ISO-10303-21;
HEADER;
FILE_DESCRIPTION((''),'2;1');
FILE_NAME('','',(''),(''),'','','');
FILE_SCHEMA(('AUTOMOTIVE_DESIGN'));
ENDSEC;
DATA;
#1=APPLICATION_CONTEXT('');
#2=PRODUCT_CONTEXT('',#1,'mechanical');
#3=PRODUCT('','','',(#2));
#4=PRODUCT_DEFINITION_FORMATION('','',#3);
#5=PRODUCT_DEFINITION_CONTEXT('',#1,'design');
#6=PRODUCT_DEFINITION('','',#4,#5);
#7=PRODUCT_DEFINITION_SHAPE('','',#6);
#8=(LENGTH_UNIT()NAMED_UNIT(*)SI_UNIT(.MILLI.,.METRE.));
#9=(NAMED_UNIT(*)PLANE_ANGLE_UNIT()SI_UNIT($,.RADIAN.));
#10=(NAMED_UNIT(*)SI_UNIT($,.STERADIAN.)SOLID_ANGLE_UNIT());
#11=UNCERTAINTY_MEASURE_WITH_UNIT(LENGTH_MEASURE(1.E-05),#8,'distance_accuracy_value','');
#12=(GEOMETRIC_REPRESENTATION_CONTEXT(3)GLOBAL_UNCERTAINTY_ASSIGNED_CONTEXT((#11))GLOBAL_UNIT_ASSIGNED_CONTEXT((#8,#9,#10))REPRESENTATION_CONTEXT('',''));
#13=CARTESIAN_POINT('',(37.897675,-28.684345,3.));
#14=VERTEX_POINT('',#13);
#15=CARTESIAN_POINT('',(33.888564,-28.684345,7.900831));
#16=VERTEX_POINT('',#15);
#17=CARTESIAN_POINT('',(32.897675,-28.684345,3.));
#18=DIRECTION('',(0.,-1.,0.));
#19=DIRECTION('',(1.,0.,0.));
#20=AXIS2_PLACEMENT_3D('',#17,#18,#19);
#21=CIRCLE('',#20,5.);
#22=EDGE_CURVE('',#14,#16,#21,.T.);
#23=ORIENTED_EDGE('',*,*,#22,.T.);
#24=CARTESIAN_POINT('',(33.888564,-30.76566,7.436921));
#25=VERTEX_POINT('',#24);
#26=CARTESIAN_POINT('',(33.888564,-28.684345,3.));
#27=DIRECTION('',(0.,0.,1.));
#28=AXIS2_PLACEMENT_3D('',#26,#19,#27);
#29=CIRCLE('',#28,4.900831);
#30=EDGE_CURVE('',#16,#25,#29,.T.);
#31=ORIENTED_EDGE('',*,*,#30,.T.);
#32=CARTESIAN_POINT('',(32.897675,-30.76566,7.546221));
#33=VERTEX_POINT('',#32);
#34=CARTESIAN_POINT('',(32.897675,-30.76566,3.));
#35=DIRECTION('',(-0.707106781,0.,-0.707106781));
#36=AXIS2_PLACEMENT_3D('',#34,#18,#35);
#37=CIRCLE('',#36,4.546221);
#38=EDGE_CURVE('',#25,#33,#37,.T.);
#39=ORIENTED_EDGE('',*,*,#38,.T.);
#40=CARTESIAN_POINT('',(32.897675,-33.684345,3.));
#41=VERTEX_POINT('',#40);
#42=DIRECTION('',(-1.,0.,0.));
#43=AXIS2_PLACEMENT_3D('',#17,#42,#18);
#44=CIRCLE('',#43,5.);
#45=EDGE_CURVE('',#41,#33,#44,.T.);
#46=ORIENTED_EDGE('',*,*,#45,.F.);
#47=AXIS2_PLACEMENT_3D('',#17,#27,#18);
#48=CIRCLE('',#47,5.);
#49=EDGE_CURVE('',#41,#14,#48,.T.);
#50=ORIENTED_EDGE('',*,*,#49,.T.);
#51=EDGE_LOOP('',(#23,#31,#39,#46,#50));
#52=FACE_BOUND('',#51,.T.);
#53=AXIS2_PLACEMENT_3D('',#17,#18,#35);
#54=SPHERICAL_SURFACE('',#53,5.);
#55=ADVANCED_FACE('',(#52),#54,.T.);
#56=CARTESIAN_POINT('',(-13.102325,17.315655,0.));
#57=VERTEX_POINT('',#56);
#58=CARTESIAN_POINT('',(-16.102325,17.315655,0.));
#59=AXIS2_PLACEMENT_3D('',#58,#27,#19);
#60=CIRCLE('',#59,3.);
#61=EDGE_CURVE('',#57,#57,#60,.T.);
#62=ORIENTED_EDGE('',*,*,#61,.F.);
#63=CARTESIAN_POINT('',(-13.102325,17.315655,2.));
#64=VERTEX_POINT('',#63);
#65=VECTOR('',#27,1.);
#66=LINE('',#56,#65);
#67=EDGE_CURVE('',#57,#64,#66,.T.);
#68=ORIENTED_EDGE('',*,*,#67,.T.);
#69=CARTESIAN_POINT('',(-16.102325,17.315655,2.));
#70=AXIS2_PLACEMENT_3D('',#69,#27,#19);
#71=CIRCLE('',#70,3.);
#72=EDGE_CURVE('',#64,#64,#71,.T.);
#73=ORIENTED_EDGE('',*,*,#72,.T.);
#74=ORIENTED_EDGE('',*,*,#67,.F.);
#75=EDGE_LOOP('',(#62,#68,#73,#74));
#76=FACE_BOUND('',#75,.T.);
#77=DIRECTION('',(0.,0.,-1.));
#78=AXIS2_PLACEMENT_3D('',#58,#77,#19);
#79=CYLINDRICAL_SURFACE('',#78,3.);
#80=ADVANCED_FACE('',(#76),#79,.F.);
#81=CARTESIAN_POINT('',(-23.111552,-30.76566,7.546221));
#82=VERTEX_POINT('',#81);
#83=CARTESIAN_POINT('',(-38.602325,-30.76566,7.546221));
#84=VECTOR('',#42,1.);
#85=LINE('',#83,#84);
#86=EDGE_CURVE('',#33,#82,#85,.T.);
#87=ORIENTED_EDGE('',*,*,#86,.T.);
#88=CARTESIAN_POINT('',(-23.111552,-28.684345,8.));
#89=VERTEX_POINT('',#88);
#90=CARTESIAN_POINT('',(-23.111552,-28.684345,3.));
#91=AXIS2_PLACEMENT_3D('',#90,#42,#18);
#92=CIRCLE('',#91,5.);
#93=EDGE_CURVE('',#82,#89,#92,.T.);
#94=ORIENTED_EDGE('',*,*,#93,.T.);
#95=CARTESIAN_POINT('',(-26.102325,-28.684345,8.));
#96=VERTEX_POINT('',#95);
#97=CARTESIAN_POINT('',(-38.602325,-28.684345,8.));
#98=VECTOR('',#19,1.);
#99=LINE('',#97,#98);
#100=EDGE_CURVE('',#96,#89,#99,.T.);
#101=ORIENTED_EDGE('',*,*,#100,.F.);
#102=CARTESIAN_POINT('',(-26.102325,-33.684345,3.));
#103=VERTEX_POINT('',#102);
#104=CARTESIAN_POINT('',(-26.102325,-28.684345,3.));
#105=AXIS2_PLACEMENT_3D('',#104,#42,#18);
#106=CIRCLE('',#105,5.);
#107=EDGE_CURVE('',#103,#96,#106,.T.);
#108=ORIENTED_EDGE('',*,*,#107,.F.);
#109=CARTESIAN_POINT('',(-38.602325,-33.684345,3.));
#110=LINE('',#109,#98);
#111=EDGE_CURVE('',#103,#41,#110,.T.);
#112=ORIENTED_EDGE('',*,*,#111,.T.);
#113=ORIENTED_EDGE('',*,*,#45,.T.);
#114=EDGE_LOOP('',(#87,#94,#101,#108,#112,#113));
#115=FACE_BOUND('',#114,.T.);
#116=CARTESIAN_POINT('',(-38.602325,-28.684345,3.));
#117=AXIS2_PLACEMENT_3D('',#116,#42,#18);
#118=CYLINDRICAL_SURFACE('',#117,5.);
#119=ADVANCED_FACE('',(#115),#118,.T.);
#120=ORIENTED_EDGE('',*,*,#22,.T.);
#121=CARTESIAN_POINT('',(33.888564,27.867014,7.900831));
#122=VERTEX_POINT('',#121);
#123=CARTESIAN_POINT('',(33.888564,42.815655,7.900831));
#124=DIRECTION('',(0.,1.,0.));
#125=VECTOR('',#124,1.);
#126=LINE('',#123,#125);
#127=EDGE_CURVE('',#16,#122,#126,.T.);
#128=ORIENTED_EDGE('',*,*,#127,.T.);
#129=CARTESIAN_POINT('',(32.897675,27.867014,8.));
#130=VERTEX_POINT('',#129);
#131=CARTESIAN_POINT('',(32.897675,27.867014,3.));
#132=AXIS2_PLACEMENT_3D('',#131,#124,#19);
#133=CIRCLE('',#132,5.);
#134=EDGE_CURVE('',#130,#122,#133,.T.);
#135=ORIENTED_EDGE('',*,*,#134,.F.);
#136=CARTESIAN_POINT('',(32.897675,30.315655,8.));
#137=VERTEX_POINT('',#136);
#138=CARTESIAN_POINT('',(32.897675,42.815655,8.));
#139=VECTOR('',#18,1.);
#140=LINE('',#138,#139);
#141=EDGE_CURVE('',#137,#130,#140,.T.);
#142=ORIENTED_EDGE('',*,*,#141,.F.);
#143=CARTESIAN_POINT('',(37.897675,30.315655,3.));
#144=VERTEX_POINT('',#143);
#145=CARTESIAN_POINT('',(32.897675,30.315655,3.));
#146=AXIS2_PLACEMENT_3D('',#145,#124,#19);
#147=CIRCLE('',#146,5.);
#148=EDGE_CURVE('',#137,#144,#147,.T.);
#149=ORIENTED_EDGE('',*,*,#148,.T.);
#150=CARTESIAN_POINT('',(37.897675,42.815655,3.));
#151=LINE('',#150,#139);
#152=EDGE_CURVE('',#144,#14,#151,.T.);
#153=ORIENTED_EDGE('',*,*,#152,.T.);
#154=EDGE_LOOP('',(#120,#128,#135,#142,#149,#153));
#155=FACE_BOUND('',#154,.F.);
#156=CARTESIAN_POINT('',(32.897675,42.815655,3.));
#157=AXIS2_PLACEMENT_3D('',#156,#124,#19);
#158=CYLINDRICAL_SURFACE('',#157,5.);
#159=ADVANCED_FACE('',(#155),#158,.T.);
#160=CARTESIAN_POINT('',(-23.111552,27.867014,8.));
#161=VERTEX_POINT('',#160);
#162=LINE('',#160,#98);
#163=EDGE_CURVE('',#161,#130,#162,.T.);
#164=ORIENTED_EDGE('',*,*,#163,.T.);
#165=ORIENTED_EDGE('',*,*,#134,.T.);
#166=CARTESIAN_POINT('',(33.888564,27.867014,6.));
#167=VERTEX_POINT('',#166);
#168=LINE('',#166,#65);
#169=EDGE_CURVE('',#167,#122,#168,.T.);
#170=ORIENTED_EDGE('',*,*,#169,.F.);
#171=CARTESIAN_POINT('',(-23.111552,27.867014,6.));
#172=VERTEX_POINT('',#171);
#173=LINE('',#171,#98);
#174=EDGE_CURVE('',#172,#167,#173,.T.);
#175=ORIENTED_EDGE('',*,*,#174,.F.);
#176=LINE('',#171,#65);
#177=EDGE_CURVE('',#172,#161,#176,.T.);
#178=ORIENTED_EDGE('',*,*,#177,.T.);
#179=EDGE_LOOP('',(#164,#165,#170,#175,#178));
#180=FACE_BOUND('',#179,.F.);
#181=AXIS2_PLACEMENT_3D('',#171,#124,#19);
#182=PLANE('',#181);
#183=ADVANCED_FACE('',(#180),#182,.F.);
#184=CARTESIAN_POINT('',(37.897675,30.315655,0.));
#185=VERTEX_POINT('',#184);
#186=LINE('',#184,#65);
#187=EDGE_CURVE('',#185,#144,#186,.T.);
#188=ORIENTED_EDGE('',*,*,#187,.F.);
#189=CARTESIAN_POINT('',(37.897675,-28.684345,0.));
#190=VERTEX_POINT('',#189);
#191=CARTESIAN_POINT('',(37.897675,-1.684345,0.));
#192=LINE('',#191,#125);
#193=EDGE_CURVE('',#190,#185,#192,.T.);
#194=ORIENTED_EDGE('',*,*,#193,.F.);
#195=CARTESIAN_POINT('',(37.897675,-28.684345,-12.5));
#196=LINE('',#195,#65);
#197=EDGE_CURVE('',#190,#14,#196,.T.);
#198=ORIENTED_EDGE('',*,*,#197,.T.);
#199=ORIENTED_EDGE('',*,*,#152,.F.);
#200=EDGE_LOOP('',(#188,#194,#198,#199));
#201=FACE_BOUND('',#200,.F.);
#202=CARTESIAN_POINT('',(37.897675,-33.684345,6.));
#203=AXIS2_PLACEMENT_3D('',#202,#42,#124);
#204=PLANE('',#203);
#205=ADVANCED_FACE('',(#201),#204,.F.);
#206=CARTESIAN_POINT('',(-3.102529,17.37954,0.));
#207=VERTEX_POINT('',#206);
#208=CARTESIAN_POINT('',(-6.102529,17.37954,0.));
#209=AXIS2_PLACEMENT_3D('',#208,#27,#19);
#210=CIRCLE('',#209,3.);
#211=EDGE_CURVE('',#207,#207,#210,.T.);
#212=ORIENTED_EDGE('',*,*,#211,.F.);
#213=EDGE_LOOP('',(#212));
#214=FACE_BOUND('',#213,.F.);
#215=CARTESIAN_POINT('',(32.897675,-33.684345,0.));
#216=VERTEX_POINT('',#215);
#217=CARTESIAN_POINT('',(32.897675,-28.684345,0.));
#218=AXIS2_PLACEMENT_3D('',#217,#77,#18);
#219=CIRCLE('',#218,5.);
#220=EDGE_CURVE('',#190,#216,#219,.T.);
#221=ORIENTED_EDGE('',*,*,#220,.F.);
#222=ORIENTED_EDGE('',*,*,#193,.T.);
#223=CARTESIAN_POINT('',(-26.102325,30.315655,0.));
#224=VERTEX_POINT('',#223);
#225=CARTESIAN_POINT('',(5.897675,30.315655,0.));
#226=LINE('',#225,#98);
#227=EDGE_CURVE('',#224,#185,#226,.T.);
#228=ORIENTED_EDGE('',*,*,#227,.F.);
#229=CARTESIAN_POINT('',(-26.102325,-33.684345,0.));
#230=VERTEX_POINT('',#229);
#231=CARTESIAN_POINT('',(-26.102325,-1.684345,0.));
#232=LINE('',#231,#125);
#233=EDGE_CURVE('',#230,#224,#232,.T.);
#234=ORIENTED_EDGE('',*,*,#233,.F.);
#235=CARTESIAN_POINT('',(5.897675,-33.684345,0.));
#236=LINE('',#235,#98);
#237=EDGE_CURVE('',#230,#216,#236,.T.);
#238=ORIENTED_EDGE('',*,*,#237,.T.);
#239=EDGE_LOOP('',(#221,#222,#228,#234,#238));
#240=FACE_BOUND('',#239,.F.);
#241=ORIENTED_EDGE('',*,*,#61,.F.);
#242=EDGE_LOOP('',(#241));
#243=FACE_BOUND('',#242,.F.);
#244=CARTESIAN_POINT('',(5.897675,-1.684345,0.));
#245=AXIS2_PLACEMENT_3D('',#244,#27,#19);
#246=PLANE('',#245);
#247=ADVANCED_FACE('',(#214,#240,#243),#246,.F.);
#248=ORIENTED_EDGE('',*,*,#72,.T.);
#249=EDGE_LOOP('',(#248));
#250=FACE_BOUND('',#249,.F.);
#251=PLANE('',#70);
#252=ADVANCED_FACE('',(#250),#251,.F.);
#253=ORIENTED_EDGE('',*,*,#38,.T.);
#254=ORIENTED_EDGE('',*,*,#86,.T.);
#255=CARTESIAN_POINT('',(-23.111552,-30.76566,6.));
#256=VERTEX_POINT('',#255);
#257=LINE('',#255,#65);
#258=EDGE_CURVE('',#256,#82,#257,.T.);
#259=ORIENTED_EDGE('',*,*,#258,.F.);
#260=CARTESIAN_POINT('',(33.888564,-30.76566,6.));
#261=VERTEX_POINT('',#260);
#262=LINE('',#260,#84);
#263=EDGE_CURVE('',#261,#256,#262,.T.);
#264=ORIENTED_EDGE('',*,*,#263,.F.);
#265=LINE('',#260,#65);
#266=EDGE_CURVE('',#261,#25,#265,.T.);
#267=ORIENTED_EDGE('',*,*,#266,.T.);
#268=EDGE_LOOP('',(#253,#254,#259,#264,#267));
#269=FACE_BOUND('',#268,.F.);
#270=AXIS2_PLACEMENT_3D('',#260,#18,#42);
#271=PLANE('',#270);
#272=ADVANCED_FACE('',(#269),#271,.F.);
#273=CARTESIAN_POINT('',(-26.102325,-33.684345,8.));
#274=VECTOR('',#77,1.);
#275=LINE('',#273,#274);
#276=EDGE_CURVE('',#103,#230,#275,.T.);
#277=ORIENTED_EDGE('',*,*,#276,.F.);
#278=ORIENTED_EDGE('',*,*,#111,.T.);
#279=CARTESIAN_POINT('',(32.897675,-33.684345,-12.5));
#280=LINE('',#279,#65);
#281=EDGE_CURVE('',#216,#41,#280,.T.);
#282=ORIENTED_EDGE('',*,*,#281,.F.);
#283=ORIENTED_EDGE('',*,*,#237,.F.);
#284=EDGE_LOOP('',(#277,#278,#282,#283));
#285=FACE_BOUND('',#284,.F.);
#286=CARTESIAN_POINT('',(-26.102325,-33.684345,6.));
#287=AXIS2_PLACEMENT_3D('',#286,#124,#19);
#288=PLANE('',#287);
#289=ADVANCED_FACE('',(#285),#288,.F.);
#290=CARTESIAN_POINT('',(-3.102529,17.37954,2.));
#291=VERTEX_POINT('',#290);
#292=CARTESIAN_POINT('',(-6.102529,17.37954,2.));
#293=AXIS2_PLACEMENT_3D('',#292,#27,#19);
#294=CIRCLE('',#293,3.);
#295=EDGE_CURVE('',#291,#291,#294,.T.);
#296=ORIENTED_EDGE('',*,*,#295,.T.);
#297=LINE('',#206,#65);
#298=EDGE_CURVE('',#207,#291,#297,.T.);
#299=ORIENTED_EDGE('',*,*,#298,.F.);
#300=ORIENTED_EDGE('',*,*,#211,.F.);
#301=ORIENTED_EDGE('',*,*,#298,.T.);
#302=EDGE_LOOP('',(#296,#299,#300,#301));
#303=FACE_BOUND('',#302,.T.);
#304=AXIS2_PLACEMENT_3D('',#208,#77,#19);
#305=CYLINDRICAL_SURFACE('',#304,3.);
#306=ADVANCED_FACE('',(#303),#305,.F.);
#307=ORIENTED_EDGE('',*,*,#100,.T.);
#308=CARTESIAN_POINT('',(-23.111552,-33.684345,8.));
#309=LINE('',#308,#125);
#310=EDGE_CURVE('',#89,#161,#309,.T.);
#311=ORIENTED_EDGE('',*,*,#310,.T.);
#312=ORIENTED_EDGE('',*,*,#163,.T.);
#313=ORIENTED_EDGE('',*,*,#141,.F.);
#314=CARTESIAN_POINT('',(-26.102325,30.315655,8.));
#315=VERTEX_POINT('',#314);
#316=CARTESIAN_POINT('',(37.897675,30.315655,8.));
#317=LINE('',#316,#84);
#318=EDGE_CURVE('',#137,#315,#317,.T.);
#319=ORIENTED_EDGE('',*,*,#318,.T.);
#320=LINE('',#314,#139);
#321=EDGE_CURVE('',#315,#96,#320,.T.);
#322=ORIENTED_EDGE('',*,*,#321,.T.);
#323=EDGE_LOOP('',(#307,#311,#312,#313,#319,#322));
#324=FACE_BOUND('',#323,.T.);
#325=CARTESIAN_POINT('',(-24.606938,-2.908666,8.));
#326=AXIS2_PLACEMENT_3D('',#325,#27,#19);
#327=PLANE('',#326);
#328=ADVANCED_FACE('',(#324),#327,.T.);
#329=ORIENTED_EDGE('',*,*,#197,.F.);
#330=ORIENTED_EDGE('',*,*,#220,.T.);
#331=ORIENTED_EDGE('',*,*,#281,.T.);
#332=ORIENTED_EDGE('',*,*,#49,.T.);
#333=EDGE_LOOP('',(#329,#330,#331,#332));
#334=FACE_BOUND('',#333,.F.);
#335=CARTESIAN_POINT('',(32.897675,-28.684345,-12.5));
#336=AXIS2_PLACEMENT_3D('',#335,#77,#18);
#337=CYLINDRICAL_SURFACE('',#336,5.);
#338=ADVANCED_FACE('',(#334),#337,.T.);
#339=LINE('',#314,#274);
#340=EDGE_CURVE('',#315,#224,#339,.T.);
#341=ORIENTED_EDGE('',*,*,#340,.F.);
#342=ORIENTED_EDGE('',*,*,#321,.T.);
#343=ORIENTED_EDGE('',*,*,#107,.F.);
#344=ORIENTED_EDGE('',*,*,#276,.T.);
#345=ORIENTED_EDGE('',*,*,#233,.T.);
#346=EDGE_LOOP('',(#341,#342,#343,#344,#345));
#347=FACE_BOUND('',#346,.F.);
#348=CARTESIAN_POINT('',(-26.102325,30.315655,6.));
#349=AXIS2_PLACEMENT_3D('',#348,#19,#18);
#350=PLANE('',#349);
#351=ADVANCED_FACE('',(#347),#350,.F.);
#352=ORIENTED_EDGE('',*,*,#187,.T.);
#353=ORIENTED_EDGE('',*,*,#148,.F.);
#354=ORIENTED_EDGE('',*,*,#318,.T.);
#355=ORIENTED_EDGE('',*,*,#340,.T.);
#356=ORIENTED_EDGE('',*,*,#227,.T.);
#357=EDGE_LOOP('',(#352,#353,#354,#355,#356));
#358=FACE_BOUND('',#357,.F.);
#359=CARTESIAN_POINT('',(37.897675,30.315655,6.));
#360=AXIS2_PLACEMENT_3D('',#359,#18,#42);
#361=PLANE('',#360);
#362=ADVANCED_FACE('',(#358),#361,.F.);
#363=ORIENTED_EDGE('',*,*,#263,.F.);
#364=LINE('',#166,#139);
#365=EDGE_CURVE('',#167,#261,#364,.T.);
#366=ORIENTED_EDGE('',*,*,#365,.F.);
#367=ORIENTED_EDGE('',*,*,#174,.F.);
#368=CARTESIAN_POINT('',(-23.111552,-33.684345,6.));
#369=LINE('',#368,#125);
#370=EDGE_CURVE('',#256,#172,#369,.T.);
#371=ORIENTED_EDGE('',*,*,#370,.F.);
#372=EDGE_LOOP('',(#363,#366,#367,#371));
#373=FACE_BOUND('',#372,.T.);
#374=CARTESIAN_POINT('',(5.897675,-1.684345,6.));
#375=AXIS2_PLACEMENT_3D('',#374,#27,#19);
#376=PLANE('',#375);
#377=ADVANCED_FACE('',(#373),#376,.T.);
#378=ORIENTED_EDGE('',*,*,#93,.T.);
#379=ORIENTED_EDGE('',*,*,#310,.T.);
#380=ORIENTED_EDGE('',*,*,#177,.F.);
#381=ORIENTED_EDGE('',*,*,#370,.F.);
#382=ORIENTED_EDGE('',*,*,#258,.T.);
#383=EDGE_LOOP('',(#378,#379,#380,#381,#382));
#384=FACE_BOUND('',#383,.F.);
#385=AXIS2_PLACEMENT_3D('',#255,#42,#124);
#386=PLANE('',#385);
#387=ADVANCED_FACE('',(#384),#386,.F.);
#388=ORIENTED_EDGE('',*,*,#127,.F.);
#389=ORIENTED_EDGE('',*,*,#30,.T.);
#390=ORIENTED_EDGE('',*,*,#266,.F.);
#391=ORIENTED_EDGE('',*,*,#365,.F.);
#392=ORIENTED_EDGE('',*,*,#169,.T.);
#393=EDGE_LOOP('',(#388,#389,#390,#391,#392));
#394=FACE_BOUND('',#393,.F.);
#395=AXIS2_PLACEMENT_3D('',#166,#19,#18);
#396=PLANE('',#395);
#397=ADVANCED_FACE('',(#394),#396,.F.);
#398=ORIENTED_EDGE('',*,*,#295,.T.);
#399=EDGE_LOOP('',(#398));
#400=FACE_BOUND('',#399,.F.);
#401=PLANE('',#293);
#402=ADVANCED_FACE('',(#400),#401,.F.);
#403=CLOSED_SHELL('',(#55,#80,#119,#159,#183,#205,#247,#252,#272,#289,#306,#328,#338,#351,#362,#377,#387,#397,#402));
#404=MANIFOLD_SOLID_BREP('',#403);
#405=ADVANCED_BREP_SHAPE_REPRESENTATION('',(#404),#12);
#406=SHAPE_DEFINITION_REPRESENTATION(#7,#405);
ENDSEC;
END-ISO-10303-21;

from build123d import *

# Parameters (mm, degrees)
F0_W         = 64
F0_H         = 64
F1_DEPTH     = 6
F2_R         = 3
F3_DEPTH     = 2
F5_DEPTH     = 2
F7_T1_DEPTH  = 71.5
F7_T3_DEPTH  = 15.5
F7_T5_DEPTH  = 71.5
F7_S9_W      = 5
F7_S9_H      = 5
F7_T10_DEPTH = 5


# Not quite as in the source:
# - a fillet or chamfer that OpenCascade refuses, or shapes differently, is made with other operations: its cross-section is extruded or revolved along the edge and cut away or added
# - a feature of the source that left no trace in its solid (it failed there, or was rolled back) is left out


with BuildPart() as f1:
    # F0 (on Top) → F1 (new body)
    with BuildSketch(Plane.XY):
        with Locations((5.897675477, -1.6843453527)):
            Rectangle(F0_W, F0_H)
    extrude(amount=F1_DEPTH)

    # F2 (on Top) → F3 (cut)
    with BuildSketch(Plane.XY):
        with Locations((-16.102324523, 17.3156546473)):
            Circle(F2_R)
        with Locations((-6.1025285926, 17.3795400876)):
            Circle(F2_R)
    extrude(amount=F3_DEPTH, mode=Mode.SUBTRACT)

    # F4 (on face) → F5 (join)
    with BuildSketch(Plane.XY.offset(6)):
        Polygon((-23.111552, 27.8670135885), (-26.102324523, 27.8670135885), (-26.102324523, -33.6843453527), (-23.111552, -33.6843453527), (-23.111552, -30.7656601071), align=None)
        Polygon((-26.102324523, 30.3156546473), (-26.102324523, 27.8670135885), (-23.111552, 27.8670135885), (33.8885635138, 27.8670135885), (37.897675477, 27.8670135885), (37.897675477, 30.3156546473), align=None)
        Polygon((37.897675477, 27.8670135885), (33.8885635138, 27.8670135885), (33.8885635138, -30.7656601071), (37.897675477, -30.7656601071), (37.897675477, -12.6674966887), align=None)
        Polygon((33.8885635138, -30.7656601071), (-23.111552, -30.7656601071), (-23.111552, -33.6843453527), (37.897675477, -33.6843453527), (37.897675477, -30.7656601071), align=None)
    extrude(amount=F5_DEPTH)

    # F7: fillet of radius 5 on 3 edges, made by hand

    # F7_s2 → F7_t1 (cut)
    with BuildSketch(Plane.YZ.offset(-38.602324523)):
        with BuildLine():
            ThreePointArc((-33.6843453527, 3), (-32.2198792586, 6.5355339059), (-28.6843453527, 8))
            Line((-28.6843453527, 8), (-33.6843453527, 8))
            Line((-33.6843453527, 8), (-33.6843453527, 3))
        make_face()
    extrude(amount=F7_T1_DEPTH, mode=Mode.SUBTRACT)

    # F7_s4 → F7_t3 (cut)
    with BuildSketch(Plane.XY.offset(-12.5)):
        with BuildLine():
            ThreePointArc((32.897675477, -33.6843453527), (36.4332093829, -32.2198792586), (37.897675477, -28.6843453527))
            Line((37.897675477, -28.6843453527), (37.897675477, -33.6843453527))
            Line((37.897675477, -33.6843453527), (32.897675477, -33.6843453527))
        make_face()
    extrude(amount=F7_T3_DEPTH, mode=Mode.SUBTRACT)

    # F7_s6 → F7_t5 (cut)
    with BuildSketch(Plane.XZ.offset(-42.8156546473)):
        with BuildLine():
            ThreePointArc((37.897675477, 3), (36.4332093829, 6.5355339059), (32.897675477, 8))
            Line((32.897675477, 8), (37.897675477, 8))
            Line((37.897675477, 8), (37.897675477, 3))
        make_face()
    extrude(amount=F7_T5_DEPTH, mode=Mode.SUBTRACT)


with BuildPart() as f7_tool8:
    # F7_s9 → F7_t10 (new body)
    with BuildSketch(Plane.XZ.offset(28.6843453527)):
        with Locations((35.397675477, 5.5)):
            Rectangle(F7_S9_W, F7_S9_H)
    extrude(amount=F7_T10_DEPTH)

    # F7_s11 → F7_t12 (revolve, cut)
    with BuildSketch(Plane(origin=(32.897675477, -28.6843453527, 3), x_dir=(-0.7071067812, 0, -0.7071067812), z_dir=(-0.7071067812, 0, 0.7071067812))):
        with BuildLine():
            ThreePointArc((0, -5), (5, 0), (0, 5))
            Line((0, 5), (0, -5))
        make_face()
    revolve(axis=Axis((32.897675477, -28.6843453527, 3), (0, -1, 0)), mode=Mode.SUBTRACT)


with BuildPart() as f1_1:
    add(f1.part)

    # F7_t7: cut F7_tool8
    add(f7_tool8.part, mode=Mode.SUBTRACT)


solid = f1_1.part
